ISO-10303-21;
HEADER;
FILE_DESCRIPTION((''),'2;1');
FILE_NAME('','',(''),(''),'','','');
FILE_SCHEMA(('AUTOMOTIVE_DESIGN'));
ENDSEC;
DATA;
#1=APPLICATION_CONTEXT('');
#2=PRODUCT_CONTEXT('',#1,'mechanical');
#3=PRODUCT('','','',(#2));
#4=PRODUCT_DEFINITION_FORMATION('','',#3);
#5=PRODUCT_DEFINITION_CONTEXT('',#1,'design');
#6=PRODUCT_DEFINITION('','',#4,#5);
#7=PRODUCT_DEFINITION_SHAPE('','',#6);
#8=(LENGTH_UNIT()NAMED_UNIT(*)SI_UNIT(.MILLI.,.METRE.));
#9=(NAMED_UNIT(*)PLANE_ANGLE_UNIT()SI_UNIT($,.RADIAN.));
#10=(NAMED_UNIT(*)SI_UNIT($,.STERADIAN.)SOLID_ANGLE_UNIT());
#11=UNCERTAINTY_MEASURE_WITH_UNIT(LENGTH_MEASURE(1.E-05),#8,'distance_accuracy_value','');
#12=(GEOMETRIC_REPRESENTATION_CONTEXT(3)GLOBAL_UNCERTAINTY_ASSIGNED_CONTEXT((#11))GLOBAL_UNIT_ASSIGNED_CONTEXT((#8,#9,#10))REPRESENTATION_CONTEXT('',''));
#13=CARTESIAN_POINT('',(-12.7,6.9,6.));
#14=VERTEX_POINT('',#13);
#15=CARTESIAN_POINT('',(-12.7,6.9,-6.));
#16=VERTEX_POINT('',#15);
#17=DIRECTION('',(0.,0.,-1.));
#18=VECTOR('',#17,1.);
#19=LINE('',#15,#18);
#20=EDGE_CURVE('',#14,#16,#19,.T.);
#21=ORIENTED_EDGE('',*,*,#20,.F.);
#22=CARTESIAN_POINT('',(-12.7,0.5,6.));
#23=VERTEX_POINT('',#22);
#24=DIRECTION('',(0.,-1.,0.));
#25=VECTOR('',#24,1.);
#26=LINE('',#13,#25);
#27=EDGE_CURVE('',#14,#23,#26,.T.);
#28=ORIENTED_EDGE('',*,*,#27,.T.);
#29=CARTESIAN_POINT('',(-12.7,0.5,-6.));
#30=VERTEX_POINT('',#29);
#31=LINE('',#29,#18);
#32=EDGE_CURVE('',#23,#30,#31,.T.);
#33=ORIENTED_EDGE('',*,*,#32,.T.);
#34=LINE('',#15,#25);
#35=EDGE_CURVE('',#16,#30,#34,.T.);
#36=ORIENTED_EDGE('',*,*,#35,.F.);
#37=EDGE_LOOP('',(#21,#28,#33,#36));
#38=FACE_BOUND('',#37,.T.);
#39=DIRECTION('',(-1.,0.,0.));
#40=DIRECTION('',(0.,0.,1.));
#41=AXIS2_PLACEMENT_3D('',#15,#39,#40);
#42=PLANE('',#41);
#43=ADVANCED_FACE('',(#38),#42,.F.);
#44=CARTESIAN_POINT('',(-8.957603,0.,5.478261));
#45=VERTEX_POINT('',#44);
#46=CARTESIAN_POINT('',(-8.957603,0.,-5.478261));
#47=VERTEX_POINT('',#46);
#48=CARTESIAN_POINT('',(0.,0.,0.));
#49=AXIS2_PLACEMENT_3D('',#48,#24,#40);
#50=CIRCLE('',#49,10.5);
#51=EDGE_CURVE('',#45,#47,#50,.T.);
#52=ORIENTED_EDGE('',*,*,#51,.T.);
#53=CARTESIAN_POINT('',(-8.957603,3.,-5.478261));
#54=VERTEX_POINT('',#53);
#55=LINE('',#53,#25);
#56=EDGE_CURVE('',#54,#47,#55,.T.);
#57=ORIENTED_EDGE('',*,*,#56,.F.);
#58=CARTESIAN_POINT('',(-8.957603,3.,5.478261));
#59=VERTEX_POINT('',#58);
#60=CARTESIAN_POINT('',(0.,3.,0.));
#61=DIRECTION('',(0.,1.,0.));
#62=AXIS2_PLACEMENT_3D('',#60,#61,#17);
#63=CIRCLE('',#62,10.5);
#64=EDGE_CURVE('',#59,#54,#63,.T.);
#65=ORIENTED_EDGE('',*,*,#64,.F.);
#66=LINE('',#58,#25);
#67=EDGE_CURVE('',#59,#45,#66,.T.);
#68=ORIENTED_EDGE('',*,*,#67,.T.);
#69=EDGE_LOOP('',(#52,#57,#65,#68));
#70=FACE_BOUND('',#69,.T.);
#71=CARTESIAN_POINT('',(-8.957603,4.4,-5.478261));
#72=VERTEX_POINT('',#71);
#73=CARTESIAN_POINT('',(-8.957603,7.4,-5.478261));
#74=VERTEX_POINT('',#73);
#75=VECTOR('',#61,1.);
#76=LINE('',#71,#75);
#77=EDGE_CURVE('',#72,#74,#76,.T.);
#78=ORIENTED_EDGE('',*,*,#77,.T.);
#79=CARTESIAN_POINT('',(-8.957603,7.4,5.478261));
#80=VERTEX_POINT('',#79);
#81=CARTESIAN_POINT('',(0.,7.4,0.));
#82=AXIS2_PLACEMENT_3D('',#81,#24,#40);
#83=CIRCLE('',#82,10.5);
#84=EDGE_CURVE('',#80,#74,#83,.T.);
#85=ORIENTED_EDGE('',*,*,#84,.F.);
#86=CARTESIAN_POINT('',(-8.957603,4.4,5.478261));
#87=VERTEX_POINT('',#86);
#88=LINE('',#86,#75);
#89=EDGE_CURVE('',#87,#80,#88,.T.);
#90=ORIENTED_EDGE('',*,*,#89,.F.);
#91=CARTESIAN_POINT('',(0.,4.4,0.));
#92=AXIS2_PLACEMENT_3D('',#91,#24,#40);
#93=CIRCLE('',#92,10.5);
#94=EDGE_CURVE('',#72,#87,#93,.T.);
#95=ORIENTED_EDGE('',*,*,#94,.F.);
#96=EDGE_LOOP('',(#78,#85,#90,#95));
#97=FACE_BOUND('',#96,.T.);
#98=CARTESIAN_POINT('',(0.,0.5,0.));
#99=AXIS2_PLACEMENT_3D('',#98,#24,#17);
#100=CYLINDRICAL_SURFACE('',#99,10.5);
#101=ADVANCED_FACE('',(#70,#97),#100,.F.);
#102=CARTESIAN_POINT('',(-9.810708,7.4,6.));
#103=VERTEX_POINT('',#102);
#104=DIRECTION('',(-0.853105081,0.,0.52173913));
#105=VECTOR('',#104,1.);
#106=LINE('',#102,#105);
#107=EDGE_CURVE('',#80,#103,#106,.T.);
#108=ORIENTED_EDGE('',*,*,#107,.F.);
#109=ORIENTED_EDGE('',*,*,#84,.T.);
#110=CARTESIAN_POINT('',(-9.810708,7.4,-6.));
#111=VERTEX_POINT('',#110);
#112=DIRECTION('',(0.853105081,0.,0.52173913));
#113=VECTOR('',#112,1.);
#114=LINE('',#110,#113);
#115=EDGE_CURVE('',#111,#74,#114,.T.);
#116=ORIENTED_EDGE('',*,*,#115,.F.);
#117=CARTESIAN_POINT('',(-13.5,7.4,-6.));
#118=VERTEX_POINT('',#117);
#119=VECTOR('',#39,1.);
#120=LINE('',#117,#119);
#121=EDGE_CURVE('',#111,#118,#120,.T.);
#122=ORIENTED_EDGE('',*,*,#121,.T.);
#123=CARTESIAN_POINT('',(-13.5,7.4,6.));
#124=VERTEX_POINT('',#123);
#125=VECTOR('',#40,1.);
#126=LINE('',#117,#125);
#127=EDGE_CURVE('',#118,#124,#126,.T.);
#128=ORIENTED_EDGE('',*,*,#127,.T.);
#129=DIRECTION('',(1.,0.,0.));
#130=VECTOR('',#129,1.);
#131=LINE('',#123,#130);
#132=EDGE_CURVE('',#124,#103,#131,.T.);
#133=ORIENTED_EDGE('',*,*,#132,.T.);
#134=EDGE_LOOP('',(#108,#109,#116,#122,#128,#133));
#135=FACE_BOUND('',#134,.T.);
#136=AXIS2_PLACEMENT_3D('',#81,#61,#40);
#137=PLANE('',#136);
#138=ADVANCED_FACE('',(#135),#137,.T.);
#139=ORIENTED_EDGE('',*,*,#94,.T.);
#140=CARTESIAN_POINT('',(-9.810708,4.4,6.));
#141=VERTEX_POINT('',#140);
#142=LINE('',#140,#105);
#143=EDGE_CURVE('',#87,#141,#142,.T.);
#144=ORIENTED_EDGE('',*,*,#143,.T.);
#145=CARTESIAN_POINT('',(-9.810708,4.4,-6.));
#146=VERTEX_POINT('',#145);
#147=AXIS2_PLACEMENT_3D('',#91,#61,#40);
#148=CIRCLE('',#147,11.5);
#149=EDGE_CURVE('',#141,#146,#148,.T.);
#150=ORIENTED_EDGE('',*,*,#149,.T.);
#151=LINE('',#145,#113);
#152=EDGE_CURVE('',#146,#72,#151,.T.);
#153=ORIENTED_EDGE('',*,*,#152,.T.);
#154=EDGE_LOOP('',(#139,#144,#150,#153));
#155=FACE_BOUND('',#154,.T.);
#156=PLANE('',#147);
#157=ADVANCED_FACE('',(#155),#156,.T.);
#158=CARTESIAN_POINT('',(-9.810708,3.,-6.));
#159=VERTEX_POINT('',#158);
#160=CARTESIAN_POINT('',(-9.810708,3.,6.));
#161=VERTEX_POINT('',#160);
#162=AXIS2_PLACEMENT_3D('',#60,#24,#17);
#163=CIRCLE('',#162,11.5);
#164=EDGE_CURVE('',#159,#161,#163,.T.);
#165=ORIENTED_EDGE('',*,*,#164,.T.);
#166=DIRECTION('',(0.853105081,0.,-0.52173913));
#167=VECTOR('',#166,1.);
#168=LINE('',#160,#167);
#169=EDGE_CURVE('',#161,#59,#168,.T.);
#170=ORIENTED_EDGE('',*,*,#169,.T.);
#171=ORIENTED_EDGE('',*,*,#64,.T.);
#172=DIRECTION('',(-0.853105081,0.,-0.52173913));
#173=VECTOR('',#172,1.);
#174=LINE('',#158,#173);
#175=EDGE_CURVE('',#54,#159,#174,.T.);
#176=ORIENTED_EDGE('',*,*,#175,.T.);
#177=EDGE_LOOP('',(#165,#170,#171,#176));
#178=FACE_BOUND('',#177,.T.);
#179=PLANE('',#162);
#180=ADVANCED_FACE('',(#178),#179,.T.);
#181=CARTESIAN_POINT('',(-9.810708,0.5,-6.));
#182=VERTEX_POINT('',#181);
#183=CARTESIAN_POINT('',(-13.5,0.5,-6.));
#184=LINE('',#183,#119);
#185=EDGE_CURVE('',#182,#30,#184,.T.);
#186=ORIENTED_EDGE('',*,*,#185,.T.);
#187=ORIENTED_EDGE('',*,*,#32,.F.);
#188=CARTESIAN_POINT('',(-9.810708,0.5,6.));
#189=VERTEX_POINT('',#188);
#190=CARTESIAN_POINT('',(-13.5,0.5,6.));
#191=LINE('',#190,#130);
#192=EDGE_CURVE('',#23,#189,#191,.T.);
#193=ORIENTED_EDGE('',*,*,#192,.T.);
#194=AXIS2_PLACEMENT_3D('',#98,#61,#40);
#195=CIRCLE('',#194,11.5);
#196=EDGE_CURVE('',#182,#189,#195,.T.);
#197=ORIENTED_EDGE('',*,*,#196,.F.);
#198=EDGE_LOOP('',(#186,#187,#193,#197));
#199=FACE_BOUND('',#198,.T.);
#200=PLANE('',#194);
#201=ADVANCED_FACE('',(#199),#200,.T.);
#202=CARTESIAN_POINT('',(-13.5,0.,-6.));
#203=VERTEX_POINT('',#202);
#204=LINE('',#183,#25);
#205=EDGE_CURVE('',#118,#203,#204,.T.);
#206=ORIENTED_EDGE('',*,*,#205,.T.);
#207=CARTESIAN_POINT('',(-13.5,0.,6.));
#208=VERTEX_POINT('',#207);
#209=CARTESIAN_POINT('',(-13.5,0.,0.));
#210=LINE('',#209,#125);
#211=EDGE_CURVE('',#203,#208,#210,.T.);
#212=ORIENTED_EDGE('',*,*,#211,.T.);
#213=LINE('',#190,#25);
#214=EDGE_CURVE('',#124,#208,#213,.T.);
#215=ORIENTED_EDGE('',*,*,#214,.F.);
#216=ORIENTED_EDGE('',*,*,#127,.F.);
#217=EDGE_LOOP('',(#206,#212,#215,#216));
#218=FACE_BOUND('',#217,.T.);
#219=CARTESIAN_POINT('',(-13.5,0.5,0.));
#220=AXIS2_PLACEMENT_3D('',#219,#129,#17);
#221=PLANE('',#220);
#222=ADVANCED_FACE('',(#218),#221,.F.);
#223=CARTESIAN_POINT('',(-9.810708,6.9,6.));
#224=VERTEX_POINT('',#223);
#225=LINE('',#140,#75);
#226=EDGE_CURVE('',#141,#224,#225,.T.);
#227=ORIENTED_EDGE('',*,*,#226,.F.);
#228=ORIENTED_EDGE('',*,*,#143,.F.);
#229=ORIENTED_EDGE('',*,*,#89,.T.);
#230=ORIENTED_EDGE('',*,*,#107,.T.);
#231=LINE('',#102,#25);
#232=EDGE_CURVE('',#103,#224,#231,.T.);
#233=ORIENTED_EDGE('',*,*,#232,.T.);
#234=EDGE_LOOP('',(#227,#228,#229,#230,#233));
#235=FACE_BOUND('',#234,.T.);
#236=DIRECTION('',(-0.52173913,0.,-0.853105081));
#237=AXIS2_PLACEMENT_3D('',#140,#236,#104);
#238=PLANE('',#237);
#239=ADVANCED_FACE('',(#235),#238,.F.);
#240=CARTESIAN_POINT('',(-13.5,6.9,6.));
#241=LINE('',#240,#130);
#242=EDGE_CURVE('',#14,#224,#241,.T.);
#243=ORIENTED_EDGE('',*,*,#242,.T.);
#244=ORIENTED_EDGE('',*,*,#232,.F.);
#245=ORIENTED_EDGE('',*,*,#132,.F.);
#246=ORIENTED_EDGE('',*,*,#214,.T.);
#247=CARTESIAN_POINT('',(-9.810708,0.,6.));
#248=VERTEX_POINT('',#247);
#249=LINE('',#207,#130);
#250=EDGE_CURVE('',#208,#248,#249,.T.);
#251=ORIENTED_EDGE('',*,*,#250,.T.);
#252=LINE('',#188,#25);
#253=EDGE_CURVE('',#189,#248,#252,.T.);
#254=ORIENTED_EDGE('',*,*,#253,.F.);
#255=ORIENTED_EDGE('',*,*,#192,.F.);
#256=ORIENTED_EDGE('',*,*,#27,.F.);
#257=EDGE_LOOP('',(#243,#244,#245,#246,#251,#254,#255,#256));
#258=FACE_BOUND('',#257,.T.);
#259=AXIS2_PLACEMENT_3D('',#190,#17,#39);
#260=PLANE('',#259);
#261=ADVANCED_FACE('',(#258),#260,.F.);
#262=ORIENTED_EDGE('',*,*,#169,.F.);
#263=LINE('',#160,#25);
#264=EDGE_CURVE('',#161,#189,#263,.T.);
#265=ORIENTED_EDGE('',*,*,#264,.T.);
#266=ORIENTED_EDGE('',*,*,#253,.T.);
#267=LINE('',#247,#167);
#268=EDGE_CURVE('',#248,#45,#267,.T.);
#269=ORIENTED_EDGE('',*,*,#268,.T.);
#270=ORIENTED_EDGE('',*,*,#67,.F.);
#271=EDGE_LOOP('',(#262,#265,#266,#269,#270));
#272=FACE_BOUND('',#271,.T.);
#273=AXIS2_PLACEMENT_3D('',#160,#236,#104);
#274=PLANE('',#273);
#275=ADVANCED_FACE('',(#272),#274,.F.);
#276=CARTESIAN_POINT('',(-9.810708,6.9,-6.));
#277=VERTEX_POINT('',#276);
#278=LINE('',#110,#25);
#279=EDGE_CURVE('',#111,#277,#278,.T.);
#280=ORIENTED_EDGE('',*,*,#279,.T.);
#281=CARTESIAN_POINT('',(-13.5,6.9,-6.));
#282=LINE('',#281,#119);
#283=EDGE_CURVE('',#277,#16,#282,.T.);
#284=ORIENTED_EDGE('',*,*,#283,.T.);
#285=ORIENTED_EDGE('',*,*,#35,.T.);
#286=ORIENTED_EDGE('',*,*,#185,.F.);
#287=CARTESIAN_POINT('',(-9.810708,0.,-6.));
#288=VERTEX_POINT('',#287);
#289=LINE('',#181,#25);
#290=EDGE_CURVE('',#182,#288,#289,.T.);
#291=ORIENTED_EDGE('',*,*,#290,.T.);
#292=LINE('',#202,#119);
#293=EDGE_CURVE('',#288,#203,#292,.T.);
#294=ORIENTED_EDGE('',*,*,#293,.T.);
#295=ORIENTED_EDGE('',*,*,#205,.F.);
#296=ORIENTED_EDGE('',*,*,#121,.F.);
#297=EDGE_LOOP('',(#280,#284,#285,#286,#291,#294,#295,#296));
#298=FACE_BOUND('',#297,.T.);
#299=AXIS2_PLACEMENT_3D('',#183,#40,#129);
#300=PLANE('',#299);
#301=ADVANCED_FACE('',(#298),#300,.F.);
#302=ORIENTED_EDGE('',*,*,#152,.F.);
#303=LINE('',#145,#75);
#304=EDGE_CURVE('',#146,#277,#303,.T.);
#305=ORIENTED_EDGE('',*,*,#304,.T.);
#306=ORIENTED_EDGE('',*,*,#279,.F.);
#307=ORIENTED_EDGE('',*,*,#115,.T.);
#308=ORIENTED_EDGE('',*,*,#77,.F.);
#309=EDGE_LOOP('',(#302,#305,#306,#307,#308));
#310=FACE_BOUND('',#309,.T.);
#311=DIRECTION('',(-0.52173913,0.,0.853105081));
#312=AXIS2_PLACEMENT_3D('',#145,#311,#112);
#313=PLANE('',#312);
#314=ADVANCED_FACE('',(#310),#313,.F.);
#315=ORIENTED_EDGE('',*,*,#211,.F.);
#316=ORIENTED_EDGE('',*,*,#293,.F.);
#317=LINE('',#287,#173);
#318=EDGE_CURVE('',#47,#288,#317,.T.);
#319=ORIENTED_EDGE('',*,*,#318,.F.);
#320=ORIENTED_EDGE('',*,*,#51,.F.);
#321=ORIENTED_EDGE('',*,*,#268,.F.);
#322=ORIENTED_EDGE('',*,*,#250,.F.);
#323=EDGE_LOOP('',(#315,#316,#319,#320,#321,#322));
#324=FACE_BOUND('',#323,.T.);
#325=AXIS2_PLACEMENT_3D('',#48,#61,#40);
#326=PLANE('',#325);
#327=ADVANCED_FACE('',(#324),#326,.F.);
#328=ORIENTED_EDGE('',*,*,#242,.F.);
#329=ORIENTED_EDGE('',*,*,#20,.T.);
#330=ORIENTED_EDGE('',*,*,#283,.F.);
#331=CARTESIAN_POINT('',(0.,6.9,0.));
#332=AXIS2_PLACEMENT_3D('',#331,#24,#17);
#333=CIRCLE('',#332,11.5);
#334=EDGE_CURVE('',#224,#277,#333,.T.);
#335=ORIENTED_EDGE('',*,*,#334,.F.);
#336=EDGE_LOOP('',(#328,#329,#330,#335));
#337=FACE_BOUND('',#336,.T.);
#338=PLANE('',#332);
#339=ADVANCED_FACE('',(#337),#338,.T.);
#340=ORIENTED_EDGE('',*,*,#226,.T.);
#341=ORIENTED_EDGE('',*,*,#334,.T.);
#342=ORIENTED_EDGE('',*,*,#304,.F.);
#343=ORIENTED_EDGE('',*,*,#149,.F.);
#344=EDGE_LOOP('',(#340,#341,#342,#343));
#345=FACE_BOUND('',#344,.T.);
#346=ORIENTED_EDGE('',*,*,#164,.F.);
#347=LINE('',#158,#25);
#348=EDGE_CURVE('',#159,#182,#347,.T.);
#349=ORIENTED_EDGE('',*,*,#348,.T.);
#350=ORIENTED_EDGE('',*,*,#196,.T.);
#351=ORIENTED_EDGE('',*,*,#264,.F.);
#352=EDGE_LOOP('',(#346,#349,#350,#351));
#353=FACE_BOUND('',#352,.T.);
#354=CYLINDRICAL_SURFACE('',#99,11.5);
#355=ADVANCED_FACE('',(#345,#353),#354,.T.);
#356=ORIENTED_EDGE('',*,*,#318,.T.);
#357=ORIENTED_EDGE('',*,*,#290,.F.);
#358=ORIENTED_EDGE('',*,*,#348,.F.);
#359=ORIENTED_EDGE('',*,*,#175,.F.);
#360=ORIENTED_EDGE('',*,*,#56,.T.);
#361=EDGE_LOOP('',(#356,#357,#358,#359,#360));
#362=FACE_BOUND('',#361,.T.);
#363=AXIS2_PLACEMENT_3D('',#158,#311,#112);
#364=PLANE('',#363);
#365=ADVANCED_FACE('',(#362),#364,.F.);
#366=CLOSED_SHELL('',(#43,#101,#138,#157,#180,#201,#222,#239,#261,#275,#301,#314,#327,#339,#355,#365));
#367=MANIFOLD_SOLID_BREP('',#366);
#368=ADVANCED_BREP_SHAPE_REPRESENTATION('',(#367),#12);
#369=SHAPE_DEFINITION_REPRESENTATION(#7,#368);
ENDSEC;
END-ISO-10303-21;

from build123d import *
from build123d.topology import SkipClean

# Parameters (mm, degrees)
EXTRUDE_1_DEPTH     = 0.5
EXTRUDE_2_DEPTH     = 6.4
EXTRUDE_3_DEPTH     = 0.5
EXTRUDE_START       = -7.4
EXTRUDE_6_DEPTH     = 7.4
SKETCH_16_W         = 0.8
SKETCH_16_H         = 12
EXTRUDE_10_DEPTH    = 6.4
EXTRUDE_11_DEPTH    = 0.5
CUT_EXTRUDE_START   = -3
CUT_EXTRUDE_1_DEPTH = 3
CUT_EXTRUDE_2_DEPTH = 3


# Read off the part's stored shape, not the designer's step: 凸台-拉伸2
with BuildPart() as part:
    # 草图1 → 凸台-拉伸1 (new body)
    with BuildSketch(Plane(origin=(0, 0, 0), x_dir=(1, 0, 0), z_dir=(0, 1, 0))):
        with BuildLine():
            Line((11.456239028, 1.002291042), (10.46004433, 0.915135299))
            ThreePointArc((10.46004433, 0.915135299), (-10.5, 0), (10.46004433, -0.915135299))
            Line((10.46004433, -0.915135299), (11.456239028, -1.002291042))
            ThreePointArc((11.456239028, -1.002291042), (5.310109052, -10.200624582), (-5.75, -9.959292144))
            ThreePointArc((-5.75, -9.959292144), (-8.028256991, -8.233898814), (-9.810708435, -6))
            Line((-9.810708435, -6), (-13.5, -6))
            Line((-13.5, -6), (-13.5, 0))
            Line((-13.5, 0), (-13.5, 6))
            Line((-13.5, 6), (-9.810708435, 6))
            ThreePointArc((-9.810708435, 6), (-8.028256991, 8.233898814), (-5.75, 9.959292144))
            ThreePointArc((-5.75, 9.959292144), (5.310109052, 10.200624582), (11.456239028, 1.002291042))
        make_face()
    extrude(amount=EXTRUDE_1_DEPTH)

    # 凸台-拉伸2 outline → 凸台-拉伸2 (add)
    with BuildSketch(Plane(origin=(0, 0.5, 0), x_dir=(1, 0, 0), z_dir=(0, 1, 0))):
        with BuildLine():
            ThreePointArc((11.456239028, 1.002291042), (-11.5, 0), (11.456239028, -1.002291042))
            Line((11.456239028, -1.002291042), (10.46004433, -0.915135299))
            ThreePointArc((10.46004433, -0.915135299), (-10.5, 0), (10.46004433, 0.915135299))
            Line((10.46004433, 0.915135299), (11.456239028, 1.002291042))
        make_face()
    extrude(amount=EXTRUDE_2_DEPTH)

    # 草图11 → 凸台-拉伸3 (add)
    with BuildSketch(Plane(origin=(0, 6.9, 0), x_dir=(1, 0, 0), z_dir=(0, 1, 0))):
        with BuildLine():
            Line((10.46004433, 0.915135299), (11.456239028, 1.002291042))
            ThreePointArc((11.456239028, 1.002291042), (-11.5, 0), (11.456239028, -1.002291042))
            Line((11.456239028, -1.002291042), (10.46004433, -0.915135299))
            ThreePointArc((10.46004433, -0.915135299), (-10.5, 0), (10.46004433, 0.915135299))
        make_face()
    extrude(amount=EXTRUDE_3_DEPTH)

    # 草图14 → 凸台-拉伸6 (add)
    with SkipClean():  # the faces are left unmerged after this step: merging them gives an invalid solid
        with BuildSketch(Plane(origin=(0, 7.4, 0), x_dir=(1, 0, 0), z_dir=(0, 1, 0)).offset(EXTRUDE_START)):
            with BuildLine():
                Line((10.46004433, 0.915135299), (11.456239028, 1.002291042))
                ThreePointArc((11.456239028, 1.002291042), (11.5, 0), (11.456239028, -1.002291042))
                Line((11.456239028, -1.002291042), (10.46004433, -0.915135299))
                ThreePointArc((10.46004433, -0.915135299), (10.5, 0), (10.46004433, 0.915135299))
            make_face()
        extrude(amount=EXTRUDE_6_DEPTH)
    add(part.part.scale(1), mode=Mode.REPLACE)  # the faces are merged on a copy

    # 草图16 → 凸台-拉伸10 (add)
    with BuildSketch(Plane(origin=(0, 0.5, 0), x_dir=(1, 0, 0), z_dir=(0, 1, 0))):
        with Locations((-13.1, 0)):
            Rectangle(SKETCH_16_W, SKETCH_16_H)
    extrude(amount=EXTRUDE_10_DEPTH)

    # 草图17 → 凸台-拉伸11 (add)
    with BuildSketch(Plane(origin=(0, 6.9, 0), x_dir=(1, 0, 0), z_dir=(0, 1, 0))):
        with BuildLine():
            Line((-13.5, 6), (-9.810708435, 6))
            ThreePointArc((-9.810708435, 6), (-11.5, 0), (-9.810708435, -6))
            Line((-9.810708435, -6), (-13.5, -6))
            Line((-13.5, -6), (-13.5, 6))
        make_face()
    extrude(amount=EXTRUDE_11_DEPTH)

    # 草图18 → 切除-拉伸1 (cut)
    with BuildSketch(Plane(origin=(0, 7.4, 0), x_dir=(1, 0, 0), z_dir=(0, 1, 0)).offset(CUT_EXTRUDE_START)):
        with BuildLine():
            Line((-9.810708435, 6), (-8.957603354, 5.47826087))
            ThreePointArc((-8.957603354, 5.47826087), (10.5, 0), (-8.957603354, -5.47826087))
            Line((-8.957603354, -5.47826087), (-9.810708435, -6))
            ThreePointArc((-9.810708435, -6), (11.5, 0), (-9.810708435, 6))
        make_face()
    extrude(amount=CUT_EXTRUDE_1_DEPTH, mode=Mode.SUBTRACT)

    # 草图19 → 切除-拉伸2 (cut)
    with BuildSketch(Plane(origin=(0, 0, 0), x_dir=(-1, 0, 0), z_dir=(0, -1, 0))):
        with BuildLine():
            Line((9.810708435, 6), (8.957603354, 5.47826087))
            ThreePointArc((8.957603354, 5.47826087), (-10.5, 0), (8.957603354, -5.47826087))
            Line((8.957603354, -5.47826087), (9.810708435, -6))
            ThreePointArc((9.810708435, -6), (-11.5, 0), (9.810708435, 6))
        make_face()
    extrude(amount=-CUT_EXTRUDE_2_DEPTH, mode=Mode.SUBTRACT)


solid = part.part
